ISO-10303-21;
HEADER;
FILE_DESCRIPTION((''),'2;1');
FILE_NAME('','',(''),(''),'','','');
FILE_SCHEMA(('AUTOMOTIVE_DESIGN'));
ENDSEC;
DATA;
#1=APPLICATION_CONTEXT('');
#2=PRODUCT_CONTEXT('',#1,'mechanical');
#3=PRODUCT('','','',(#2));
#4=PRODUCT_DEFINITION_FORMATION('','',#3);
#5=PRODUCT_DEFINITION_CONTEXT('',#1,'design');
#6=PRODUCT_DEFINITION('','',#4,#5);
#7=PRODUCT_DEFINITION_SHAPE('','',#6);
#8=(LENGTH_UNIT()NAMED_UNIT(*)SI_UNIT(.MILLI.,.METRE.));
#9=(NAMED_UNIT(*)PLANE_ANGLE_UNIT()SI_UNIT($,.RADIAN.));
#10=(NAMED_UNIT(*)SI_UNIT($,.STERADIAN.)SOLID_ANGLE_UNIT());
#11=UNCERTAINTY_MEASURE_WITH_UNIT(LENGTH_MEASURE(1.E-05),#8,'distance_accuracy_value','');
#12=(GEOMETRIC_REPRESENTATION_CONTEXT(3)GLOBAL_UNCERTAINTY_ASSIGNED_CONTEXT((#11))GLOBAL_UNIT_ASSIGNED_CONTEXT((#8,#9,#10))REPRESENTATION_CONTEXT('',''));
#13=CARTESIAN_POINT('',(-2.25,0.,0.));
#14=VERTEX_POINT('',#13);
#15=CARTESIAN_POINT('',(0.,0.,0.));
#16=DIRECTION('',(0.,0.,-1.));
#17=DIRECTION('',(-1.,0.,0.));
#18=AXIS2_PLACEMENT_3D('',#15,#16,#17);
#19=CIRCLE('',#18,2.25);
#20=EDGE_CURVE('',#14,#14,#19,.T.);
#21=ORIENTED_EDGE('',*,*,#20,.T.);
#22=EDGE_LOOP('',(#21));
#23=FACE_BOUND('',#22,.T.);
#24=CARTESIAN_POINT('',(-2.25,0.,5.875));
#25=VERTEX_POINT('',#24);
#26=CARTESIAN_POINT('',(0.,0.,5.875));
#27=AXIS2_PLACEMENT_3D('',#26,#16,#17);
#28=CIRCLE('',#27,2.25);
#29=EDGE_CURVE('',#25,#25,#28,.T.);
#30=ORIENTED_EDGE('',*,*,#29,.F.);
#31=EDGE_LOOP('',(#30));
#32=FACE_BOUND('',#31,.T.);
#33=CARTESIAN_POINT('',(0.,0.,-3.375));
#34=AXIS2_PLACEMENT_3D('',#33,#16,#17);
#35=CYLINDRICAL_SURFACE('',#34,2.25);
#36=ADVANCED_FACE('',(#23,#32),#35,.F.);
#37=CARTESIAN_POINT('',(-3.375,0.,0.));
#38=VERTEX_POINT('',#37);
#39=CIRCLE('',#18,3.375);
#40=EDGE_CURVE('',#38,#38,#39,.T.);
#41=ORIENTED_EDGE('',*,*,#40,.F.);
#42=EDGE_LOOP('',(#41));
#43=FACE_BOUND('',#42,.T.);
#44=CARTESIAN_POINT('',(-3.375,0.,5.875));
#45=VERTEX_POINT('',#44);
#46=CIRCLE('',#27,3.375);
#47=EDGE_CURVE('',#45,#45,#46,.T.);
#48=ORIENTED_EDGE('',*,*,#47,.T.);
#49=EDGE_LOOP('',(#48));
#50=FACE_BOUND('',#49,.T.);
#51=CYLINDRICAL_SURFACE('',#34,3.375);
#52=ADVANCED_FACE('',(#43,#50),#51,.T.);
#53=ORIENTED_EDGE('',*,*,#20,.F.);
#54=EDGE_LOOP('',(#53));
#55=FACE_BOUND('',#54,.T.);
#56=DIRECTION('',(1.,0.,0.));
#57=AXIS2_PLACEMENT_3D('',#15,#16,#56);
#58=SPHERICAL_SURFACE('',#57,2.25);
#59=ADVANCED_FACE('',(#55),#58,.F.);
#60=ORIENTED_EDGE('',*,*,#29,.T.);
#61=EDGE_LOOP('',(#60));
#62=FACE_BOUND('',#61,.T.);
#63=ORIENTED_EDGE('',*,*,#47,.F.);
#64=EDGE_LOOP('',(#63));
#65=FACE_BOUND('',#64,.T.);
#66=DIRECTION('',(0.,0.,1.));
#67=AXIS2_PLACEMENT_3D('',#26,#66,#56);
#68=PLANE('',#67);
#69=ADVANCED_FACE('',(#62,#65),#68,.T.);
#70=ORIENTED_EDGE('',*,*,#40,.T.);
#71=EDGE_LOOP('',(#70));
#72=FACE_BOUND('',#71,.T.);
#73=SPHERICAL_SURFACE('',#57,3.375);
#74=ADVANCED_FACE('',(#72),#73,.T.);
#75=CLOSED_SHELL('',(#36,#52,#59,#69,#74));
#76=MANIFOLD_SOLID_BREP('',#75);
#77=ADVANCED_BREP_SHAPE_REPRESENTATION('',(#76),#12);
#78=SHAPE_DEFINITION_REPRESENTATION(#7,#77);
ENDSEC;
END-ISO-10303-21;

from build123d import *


with BuildPart() as part:
    # Sketch1 → Revolve1 (revolve)
    with BuildSketch(Plane(origin=(0, 0, 0), x_dir=(1, 0, 0), z_dir=(0, 1, 0))):
        with BuildLine():
            ThreePointArc((3.375, 0), (2.386485387, 2.386485387), (0, 3.375))
            Line((0, 3.375), (0, 2.25))
            ThreePointArc((0, 2.25), (1.590990258, 1.590990258), (2.25, 0))
            Line((2.25, 0), (2.25, -5.875))
            Line((2.25, -5.875), (3.375, -5.875))
            Line((3.375, -5.875), (3.375, 0))
        make_face()
    revolve(axis=Axis((0, 0, -3.375), (0, 0, 1)))


solid = part.part
